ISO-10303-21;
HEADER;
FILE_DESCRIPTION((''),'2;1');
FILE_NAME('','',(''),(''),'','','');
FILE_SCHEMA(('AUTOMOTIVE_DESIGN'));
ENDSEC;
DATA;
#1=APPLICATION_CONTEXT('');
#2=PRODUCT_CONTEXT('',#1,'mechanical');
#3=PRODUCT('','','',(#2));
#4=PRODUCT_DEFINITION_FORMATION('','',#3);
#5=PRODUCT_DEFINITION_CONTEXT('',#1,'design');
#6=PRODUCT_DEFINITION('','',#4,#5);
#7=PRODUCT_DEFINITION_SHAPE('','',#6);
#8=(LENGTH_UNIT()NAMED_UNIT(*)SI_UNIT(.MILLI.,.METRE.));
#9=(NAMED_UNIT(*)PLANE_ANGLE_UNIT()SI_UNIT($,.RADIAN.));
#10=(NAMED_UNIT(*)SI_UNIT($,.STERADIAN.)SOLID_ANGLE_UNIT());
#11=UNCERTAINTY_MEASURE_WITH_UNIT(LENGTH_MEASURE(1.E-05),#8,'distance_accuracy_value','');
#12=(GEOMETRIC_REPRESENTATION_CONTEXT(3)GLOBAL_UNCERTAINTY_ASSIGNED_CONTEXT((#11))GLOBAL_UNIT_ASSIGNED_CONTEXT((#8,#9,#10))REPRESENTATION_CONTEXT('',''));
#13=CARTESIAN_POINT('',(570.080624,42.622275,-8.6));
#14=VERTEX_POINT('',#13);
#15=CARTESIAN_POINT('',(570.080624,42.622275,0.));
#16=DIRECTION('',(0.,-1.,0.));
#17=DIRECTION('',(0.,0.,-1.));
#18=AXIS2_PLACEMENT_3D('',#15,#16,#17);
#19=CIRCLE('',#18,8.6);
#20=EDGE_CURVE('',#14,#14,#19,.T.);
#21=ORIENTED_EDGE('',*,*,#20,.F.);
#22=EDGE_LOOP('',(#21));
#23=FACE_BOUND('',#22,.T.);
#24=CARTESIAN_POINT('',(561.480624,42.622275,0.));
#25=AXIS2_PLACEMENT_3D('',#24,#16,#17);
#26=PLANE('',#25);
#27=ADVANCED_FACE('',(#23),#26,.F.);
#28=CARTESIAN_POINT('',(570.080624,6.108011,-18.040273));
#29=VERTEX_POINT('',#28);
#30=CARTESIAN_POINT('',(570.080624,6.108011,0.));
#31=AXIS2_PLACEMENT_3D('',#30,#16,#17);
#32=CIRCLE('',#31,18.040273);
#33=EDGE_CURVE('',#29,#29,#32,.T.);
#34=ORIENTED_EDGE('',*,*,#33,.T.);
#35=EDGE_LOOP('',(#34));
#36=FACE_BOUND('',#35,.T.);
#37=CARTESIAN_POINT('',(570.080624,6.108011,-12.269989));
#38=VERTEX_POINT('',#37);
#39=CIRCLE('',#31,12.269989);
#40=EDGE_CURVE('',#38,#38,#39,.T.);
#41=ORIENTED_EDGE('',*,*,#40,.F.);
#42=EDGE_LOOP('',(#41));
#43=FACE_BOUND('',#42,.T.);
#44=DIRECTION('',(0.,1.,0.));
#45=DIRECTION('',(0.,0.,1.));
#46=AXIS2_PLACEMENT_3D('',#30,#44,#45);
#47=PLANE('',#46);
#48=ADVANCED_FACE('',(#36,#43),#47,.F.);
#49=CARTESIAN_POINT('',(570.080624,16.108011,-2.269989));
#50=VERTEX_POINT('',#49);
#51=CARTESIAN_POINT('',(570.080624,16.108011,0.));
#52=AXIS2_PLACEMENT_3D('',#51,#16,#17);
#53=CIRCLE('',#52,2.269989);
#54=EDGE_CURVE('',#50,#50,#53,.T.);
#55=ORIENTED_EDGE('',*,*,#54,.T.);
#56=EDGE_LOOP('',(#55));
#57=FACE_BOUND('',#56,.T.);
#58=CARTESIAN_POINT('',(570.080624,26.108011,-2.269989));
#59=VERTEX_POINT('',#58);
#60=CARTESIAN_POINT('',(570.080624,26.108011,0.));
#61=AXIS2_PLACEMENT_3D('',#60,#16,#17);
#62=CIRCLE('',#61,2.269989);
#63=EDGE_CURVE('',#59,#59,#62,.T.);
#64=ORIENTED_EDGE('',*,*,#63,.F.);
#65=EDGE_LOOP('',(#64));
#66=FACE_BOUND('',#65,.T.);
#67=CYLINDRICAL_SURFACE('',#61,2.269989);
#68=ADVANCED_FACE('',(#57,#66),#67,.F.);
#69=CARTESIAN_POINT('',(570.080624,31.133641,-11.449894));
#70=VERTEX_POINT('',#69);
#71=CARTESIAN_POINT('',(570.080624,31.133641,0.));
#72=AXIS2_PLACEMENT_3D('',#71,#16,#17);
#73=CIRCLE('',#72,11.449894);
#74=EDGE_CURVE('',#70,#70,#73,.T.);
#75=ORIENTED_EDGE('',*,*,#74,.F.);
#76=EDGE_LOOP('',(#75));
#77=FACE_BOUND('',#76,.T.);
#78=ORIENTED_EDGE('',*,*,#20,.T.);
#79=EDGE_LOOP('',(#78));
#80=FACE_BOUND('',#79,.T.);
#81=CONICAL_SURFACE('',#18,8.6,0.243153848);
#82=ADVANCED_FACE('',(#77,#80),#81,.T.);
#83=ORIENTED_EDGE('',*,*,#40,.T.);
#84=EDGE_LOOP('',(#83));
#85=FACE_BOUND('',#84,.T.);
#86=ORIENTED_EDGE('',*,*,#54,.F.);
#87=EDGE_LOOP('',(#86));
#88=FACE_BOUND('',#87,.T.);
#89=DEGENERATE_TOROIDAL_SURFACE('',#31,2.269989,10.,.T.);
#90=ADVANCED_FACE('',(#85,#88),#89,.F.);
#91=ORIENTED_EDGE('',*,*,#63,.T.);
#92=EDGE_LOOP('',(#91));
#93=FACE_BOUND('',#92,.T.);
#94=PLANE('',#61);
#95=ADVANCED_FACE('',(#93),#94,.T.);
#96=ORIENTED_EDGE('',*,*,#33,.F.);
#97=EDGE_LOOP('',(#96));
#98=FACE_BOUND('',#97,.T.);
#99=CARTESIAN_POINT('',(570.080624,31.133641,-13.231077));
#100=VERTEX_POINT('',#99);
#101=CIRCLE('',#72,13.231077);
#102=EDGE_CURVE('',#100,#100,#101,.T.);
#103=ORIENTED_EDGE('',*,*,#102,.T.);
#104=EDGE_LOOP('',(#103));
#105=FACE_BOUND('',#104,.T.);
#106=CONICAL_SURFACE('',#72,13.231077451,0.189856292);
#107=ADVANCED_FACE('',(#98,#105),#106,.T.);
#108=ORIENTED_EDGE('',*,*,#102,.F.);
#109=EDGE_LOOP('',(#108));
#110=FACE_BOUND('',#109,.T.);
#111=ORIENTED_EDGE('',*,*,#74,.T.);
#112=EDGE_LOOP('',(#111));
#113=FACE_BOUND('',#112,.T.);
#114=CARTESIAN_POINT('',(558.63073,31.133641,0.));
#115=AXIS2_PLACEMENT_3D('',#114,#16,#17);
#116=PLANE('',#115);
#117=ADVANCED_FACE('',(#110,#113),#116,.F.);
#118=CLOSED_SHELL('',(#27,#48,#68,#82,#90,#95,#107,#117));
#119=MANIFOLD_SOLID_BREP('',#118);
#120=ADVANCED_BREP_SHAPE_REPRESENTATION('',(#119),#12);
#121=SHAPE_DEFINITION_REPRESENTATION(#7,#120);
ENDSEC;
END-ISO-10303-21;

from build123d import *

# Parameters (mm, degrees)
SKETCH3_R          = 12.26998913
CUT_EXTRUDE1_DEPTH = 10
FILLET1_R          = 10
SKETCH4_R          = 2.26998913
CUT_EXTRUDE2_DEPTH = 10


with BuildPart() as part:
    # Sketch1 → Revolve1 (revolve)
    with BuildSketch(Plane.XY, mode=Mode.PRIVATE) as revolve1_sk:
        Polygon((558.630730273, 31.133640952), (561.480624089, 42.622275397), (570.080624089, 42.622275397), (570.080624089, 6.108010882), (552.040350824, 6.108010882), (556.849546639, 31.133640952), align=None)
    revolve(revolve1_sk.sketch.rotate(Axis((570.080624089, 6.108010882, 0), (0, 1, 0)), 270), axis=Axis((570.080624089, 6.108010882, 0), (0, 1, 0)))

    # Sketch3 → Cut-Extrude1 (cut)
    with BuildSketch(Plane(origin=(0, 6.108010882, 0), x_dir=(-1, 0, 0), z_dir=(0, -1, 0))):
        with Locations(Location((-570.080624089, 0, 0), (0, 0, 90))):
            Circle(SKETCH3_R)
    extrude(amount=-CUT_EXTRUDE1_DEPTH, mode=Mode.SUBTRACT)

    # Fillet1
    fillet1_edges = [part.edges().sort_by_distance(p)[0] for p in [
        (570.080624089, 16.108010882, 12.26998913),
    ]]
    fillet(fillet1_edges, radius=FILLET1_R - 0.0001)  # a hair under: the kernel refuses the full size

    # Sketch4 → Cut-Extrude2 (cut)
    with BuildSketch(Plane(origin=(0, 16.108010882, 0), x_dir=(-1, 0, 0), z_dir=(0, -1, 0))):
        with Locations(Location((-570.080624089, 0, 0), (0, 0, 90))):
            Circle(SKETCH4_R)
    extrude(amount=-CUT_EXTRUDE2_DEPTH, mode=Mode.SUBTRACT)


solid = part.part
